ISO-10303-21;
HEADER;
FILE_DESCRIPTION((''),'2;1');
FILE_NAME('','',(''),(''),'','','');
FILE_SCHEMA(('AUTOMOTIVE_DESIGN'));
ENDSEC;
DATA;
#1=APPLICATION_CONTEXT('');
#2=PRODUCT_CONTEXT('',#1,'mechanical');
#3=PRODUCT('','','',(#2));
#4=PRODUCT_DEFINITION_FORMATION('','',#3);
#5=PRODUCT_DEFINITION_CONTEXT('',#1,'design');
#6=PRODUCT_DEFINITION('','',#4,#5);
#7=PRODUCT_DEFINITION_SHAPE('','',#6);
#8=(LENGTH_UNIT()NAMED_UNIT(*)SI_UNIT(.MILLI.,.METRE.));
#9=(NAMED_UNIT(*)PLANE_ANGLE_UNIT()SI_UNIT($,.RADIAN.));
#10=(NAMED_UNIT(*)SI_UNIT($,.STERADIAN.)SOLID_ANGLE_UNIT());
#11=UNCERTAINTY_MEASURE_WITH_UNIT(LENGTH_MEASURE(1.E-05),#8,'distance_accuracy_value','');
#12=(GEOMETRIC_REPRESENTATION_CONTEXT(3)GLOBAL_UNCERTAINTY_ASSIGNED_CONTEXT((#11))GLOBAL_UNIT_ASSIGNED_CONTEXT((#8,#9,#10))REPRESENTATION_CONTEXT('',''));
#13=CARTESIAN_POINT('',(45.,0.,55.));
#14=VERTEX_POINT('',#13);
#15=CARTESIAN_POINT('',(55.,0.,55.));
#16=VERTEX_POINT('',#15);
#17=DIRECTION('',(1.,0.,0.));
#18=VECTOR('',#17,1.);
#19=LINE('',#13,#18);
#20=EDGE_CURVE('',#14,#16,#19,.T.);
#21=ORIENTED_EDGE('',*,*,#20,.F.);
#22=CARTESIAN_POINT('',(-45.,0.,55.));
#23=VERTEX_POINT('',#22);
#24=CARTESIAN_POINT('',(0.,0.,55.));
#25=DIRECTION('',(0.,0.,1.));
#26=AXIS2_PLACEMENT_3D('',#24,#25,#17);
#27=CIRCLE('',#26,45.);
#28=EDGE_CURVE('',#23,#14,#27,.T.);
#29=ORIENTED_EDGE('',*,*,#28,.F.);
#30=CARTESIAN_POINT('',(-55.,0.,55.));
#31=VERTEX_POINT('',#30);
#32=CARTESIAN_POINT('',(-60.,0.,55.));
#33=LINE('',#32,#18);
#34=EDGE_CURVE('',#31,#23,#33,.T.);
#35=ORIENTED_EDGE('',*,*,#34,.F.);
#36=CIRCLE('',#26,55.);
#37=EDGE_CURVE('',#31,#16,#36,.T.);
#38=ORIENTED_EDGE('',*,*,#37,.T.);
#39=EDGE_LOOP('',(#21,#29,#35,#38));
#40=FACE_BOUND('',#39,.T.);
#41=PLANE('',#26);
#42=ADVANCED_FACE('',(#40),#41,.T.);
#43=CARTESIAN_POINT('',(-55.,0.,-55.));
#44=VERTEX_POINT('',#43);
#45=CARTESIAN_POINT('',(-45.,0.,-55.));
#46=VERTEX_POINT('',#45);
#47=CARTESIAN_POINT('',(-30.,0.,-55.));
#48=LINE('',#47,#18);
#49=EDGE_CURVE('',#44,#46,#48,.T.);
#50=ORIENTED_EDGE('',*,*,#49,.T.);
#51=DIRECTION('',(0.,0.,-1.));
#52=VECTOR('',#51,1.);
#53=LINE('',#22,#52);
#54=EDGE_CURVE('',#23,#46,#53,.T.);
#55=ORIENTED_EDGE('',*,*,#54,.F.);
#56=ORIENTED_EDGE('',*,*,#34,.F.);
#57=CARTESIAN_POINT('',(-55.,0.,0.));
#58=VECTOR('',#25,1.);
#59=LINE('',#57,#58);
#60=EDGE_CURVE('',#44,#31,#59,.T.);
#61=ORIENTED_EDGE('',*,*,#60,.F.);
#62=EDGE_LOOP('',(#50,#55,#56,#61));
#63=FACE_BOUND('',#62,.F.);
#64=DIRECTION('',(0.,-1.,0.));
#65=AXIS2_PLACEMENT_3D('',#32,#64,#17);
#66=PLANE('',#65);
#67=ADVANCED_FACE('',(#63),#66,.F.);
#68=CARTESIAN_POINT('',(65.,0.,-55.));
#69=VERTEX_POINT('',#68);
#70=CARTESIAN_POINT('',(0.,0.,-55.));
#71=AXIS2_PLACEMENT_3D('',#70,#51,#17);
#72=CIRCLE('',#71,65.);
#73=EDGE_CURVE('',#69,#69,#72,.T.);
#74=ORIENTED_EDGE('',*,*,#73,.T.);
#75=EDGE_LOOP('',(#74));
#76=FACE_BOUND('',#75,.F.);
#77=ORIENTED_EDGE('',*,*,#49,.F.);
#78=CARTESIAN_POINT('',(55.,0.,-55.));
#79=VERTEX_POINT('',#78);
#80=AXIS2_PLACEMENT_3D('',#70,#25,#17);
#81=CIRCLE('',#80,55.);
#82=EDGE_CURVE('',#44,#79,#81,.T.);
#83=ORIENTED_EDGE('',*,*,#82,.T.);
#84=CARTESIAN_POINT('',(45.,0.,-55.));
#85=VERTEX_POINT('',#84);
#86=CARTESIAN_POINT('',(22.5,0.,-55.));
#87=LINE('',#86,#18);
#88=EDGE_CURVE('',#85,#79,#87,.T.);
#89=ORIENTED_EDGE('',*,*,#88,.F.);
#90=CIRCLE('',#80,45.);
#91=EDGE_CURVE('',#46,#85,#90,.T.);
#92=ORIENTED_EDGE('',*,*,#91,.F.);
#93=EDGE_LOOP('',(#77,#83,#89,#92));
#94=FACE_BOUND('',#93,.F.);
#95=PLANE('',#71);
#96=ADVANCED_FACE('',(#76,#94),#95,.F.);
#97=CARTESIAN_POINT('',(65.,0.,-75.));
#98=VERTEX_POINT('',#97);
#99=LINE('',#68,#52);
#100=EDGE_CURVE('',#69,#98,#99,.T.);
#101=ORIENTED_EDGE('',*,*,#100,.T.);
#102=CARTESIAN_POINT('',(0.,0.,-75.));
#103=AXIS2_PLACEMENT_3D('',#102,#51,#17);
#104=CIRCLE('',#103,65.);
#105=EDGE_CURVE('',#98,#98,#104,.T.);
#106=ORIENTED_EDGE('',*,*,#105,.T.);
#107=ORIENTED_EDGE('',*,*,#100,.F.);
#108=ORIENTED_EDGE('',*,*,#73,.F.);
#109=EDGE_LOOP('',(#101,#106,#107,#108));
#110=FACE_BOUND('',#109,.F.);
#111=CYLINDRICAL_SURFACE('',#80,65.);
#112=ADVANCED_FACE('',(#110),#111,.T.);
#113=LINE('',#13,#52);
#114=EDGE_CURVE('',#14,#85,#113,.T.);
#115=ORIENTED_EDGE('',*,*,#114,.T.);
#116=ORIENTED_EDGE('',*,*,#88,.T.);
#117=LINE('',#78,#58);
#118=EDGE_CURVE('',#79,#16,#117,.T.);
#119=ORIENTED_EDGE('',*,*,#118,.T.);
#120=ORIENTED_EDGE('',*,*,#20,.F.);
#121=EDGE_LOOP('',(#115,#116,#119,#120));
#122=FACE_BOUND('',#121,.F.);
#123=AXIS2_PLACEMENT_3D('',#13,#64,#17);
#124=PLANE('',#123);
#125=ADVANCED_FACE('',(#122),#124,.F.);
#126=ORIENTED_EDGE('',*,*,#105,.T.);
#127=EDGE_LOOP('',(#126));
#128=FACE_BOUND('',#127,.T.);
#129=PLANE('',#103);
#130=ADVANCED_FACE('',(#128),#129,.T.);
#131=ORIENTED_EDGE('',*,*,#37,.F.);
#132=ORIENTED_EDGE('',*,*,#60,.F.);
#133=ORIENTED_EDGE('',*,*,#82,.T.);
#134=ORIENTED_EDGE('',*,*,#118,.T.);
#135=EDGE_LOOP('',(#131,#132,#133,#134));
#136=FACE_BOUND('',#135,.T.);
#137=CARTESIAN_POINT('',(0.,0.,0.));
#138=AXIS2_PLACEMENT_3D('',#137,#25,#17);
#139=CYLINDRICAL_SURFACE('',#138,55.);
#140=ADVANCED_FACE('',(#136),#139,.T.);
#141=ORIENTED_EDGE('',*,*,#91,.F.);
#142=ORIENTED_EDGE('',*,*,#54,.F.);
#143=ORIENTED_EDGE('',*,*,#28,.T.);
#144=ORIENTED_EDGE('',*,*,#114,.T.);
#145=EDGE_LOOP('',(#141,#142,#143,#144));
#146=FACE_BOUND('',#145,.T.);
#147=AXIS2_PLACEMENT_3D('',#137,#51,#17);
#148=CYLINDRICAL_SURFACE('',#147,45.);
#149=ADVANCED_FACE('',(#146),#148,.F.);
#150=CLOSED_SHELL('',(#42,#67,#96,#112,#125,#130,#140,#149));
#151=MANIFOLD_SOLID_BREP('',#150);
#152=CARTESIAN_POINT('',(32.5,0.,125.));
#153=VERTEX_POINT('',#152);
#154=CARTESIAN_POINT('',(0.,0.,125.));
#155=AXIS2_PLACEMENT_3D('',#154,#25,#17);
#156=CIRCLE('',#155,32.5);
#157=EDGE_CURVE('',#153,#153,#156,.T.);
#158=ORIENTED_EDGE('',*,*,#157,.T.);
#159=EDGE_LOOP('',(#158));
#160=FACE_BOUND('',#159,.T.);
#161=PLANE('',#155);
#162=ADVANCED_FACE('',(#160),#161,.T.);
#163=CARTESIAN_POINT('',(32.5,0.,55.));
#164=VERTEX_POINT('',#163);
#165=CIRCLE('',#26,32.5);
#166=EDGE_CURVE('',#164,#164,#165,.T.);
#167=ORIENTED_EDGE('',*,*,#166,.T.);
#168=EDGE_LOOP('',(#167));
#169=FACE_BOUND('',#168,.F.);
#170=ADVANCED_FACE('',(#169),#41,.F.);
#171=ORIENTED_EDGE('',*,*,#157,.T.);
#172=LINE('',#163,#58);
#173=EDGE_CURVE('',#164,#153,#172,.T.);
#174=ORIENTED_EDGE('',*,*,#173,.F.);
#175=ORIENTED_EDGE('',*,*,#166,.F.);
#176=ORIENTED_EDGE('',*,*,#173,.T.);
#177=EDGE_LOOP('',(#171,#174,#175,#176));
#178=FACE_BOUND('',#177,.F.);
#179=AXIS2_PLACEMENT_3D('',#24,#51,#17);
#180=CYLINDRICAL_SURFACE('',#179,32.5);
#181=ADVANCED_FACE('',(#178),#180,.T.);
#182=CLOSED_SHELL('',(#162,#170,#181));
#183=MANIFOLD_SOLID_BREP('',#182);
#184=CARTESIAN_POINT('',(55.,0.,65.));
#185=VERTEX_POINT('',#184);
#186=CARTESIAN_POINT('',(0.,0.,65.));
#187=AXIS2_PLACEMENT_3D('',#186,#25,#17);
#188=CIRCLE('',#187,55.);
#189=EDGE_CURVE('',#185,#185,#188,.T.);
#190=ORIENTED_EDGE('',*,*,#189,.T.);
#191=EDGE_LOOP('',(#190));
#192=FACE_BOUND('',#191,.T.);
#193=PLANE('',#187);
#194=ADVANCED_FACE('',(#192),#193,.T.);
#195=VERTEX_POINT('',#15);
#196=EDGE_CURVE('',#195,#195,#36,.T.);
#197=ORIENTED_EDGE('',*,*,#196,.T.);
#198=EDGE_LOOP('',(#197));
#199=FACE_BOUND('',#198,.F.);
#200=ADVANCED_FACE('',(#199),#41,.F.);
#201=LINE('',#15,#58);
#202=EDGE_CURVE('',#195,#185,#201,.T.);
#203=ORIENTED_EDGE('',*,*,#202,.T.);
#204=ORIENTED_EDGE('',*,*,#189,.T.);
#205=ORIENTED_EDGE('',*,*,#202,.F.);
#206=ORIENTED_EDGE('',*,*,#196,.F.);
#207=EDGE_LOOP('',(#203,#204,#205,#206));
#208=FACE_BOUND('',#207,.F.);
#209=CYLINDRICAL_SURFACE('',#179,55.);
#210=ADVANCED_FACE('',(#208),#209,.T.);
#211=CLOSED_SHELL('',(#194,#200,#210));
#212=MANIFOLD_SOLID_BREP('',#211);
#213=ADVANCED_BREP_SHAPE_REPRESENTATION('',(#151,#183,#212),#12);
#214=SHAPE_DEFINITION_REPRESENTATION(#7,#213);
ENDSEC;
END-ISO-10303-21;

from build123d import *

# Parameters (mm, degrees)
F0_R      = 55
F0_R_2    = 45
F1_DEPTH  = 55
F3_DEPTH  = 130
F5_R      = 55
F6_DEPTH  = 10
F7_R      = 32.5
F8_DEPTH  = 70
F11_R     = 65
F12_DEPTH = 20


with BuildPart() as f1:
    # F0 (on Top) → F1 (new body, symmetric)
    with BuildSketch(Plane.XY):
        Circle(F0_R)
        Circle(F0_R_2, mode=Mode.SUBTRACT)
    extrude(amount=F1_DEPTH, both=True)

    # F2 (on face) → F3 (cut)
    with BuildSketch(Plane.XY.offset(55)):
        with BuildLine():
            ThreePointArc((-45, 0), (0, 45), (45, 0))
            Line((45, 0), (60, 0))
            ThreePointArc((60, 0), (0, 60), (-60, 0))
            Line((-60, 0), (-45, 0))
        make_face()
    extrude(amount=-F3_DEPTH, mode=Mode.SUBTRACT)

    # F11 (on offset) → F12 (join)
    with BuildSketch(Plane(origin=(0, 0, -55), x_dir=(1, 0, 0), z_dir=(0, 0, -1))):
        Circle(F11_R)
    extrude(amount=F12_DEPTH)


with BuildPart() as f6:
    # F5 (on offset) → F6 (new body)
    with BuildSketch(Plane.XY.offset(55)):
        Circle(F5_R)
    extrude(amount=F6_DEPTH)


with BuildPart() as f8:
    # F7 (on offset) → F8 (new body)
    with BuildSketch(Plane.XY.offset(55)):
        Circle(F7_R)
    extrude(amount=F8_DEPTH)


solid = Compound([f1.part, f6.part, f8.part])
